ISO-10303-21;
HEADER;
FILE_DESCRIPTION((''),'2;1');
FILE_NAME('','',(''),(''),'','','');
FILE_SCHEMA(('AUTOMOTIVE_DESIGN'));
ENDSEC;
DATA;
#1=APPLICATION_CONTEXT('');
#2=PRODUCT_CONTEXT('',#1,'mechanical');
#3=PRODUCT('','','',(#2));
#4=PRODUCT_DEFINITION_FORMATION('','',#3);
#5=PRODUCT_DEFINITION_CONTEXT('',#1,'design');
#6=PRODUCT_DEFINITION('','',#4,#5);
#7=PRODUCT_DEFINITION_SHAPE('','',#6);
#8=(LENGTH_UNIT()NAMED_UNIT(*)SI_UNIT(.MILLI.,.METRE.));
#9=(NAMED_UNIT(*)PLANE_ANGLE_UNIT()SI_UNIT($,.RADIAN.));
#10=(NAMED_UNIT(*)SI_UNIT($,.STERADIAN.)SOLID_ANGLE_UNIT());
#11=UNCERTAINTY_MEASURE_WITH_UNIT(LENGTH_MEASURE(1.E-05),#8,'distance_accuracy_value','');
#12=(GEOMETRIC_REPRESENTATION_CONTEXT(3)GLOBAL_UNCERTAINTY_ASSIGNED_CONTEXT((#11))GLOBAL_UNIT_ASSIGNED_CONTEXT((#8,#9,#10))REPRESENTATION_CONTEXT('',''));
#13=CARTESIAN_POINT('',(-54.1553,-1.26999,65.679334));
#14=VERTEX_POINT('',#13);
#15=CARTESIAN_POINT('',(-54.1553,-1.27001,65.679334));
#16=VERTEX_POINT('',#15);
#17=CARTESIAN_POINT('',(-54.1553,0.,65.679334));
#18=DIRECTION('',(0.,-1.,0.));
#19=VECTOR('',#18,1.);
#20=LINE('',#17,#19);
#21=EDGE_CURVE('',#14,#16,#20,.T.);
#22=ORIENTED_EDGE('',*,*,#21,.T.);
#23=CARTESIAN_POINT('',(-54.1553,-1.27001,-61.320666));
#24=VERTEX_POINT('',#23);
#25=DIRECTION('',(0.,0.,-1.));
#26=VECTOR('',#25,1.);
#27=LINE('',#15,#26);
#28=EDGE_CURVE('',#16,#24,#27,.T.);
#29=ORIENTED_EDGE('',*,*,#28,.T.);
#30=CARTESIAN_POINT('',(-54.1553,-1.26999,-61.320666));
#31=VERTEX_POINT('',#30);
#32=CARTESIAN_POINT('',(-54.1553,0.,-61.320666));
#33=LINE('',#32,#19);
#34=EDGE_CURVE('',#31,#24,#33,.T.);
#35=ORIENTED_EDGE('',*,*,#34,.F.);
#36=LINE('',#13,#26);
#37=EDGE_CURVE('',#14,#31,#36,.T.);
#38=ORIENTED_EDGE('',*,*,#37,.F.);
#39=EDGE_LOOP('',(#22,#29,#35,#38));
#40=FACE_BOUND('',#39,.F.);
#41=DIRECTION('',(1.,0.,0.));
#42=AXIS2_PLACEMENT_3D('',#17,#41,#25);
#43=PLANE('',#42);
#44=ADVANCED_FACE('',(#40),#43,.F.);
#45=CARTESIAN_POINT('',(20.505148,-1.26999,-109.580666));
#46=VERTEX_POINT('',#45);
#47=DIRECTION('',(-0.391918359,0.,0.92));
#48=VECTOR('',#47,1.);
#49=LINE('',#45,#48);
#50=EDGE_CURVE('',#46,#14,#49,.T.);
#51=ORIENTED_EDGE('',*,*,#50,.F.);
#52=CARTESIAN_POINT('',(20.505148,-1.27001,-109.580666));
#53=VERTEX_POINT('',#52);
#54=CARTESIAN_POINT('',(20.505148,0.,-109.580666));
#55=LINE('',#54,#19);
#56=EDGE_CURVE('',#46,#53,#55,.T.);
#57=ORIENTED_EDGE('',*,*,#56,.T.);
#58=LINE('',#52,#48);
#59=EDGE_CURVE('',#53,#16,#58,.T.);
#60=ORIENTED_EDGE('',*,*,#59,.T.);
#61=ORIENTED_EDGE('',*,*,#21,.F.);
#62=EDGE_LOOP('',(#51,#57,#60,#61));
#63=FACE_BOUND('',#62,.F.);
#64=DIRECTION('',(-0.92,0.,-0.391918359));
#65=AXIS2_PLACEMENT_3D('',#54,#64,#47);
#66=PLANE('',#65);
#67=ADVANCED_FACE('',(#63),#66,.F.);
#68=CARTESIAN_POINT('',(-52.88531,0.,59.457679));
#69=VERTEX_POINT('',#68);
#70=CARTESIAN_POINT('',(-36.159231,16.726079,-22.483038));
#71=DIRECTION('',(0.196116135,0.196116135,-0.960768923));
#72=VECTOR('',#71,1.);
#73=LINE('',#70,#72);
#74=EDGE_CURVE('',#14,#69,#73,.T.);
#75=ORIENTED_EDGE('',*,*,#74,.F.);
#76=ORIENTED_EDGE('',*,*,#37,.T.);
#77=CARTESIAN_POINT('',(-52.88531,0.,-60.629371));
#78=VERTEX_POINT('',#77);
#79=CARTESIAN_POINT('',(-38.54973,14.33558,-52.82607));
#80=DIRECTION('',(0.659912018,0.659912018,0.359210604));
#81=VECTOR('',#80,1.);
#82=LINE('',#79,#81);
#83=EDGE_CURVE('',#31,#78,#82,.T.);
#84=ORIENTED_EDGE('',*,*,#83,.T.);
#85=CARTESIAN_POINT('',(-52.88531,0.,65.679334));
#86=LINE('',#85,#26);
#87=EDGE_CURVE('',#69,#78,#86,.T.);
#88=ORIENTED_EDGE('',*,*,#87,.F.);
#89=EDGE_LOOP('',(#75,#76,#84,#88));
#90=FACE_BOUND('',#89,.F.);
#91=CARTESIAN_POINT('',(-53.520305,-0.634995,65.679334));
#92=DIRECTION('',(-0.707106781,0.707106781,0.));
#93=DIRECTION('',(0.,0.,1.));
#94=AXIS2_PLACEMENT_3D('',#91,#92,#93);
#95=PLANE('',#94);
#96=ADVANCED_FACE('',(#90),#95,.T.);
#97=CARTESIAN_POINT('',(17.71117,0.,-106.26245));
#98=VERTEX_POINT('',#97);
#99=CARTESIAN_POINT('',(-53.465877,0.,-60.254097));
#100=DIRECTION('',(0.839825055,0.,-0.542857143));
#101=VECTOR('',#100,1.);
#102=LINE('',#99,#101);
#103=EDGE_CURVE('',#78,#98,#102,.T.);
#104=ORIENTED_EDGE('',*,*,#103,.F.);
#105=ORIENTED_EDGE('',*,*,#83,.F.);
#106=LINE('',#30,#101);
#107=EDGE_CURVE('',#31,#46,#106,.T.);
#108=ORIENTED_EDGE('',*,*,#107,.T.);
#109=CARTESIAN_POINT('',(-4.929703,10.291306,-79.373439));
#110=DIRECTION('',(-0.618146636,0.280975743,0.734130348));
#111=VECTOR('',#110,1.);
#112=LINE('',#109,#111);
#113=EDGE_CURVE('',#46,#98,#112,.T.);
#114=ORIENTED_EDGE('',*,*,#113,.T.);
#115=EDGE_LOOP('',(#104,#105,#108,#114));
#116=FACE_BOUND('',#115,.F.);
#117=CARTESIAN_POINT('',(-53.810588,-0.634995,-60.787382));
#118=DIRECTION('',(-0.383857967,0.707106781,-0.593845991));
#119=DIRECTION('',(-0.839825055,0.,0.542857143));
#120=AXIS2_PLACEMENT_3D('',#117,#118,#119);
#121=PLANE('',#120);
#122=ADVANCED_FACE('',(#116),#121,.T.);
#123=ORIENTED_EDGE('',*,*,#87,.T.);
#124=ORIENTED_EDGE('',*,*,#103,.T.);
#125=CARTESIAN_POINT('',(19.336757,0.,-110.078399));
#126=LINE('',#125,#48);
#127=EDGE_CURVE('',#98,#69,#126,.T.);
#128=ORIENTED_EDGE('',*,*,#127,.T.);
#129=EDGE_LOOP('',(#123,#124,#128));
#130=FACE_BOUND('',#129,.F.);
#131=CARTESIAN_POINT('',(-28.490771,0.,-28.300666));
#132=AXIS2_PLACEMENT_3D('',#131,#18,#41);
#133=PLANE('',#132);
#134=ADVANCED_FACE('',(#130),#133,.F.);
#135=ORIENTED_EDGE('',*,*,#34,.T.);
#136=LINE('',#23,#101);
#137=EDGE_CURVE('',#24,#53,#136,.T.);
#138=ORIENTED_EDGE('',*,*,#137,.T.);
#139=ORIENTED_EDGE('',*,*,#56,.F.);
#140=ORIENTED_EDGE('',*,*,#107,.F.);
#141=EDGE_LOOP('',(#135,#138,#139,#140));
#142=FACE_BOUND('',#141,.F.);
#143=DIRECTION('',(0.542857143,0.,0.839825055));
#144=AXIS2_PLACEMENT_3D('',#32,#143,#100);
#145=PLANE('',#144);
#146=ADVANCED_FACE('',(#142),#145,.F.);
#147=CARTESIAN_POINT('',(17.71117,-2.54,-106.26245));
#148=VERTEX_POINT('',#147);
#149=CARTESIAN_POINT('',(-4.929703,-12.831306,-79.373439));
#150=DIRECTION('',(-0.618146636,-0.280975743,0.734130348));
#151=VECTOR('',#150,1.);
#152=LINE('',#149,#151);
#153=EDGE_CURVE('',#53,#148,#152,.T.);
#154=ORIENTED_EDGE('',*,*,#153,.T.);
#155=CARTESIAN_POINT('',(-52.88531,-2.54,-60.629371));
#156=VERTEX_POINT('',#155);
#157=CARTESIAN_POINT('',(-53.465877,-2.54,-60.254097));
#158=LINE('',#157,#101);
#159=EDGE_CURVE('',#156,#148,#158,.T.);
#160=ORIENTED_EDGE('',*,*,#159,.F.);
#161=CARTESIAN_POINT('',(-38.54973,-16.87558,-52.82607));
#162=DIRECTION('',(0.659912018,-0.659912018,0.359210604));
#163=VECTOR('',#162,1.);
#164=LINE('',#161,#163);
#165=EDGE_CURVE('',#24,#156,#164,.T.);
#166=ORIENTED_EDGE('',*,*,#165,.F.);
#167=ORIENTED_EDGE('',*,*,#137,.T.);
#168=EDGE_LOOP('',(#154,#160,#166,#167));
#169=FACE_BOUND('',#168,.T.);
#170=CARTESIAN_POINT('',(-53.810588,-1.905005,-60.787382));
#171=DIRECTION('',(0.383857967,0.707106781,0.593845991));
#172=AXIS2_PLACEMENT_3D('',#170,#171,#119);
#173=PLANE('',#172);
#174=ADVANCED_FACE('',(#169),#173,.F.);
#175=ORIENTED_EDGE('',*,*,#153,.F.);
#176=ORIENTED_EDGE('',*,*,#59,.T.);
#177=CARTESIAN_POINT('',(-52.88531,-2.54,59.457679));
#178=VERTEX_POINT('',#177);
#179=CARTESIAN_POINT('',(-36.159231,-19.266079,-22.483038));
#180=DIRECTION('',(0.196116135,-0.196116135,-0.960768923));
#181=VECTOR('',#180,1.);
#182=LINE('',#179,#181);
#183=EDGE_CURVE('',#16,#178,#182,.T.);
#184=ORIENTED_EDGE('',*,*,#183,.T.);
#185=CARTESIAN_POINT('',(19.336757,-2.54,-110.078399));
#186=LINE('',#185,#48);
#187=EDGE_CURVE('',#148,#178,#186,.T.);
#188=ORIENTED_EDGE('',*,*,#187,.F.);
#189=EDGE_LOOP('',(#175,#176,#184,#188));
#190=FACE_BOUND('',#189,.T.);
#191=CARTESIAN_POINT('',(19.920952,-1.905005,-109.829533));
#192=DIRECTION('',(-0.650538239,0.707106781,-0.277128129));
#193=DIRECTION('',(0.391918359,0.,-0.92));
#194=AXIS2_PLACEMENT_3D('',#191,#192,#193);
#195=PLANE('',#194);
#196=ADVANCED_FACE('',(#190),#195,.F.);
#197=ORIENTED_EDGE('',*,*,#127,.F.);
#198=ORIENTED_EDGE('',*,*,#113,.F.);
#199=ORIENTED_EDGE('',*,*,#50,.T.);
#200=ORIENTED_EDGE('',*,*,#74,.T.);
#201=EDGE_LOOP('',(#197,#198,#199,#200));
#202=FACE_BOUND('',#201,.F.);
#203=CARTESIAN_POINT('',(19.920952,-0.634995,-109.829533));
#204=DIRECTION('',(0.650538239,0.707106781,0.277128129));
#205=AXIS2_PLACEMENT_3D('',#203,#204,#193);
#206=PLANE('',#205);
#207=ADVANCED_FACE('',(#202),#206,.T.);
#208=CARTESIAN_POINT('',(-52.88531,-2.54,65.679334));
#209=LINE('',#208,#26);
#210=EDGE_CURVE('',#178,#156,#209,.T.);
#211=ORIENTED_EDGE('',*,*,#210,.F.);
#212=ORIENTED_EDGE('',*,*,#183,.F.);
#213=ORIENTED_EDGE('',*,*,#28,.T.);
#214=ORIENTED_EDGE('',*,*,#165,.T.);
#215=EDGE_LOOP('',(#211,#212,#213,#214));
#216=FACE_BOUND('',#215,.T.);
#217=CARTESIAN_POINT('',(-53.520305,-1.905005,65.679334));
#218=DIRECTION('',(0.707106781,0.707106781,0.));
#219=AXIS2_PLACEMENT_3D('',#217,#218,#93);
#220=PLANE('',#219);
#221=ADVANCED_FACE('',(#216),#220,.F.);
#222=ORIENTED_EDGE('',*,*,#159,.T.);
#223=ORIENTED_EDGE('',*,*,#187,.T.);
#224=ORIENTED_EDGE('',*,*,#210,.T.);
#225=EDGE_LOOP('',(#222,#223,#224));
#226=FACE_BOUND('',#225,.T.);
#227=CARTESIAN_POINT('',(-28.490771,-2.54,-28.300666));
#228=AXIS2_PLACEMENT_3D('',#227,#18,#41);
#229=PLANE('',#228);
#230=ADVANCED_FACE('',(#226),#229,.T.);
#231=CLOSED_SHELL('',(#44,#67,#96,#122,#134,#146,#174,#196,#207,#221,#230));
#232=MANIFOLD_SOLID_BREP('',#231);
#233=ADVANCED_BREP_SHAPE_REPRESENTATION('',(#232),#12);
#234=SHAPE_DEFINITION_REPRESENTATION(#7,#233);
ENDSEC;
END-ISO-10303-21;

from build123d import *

# Parameters (mm, degrees)
F1_DEPTH = 2.54
F2_SIZE  = 1.26999


# Not quite as in the source:
# - a fillet or chamfer is up to 0.001 mm smaller than in the source, because OpenCascade refuses the exact size


with BuildPart() as f1:
    # F0 (on Front) → F1 (new body)
    with BuildSketch(Plane.XZ):
        Polygon((20.5051476899, -109.5806663148), (-54.1552996701, 65.6793336852), (-54.1552996701, -61.3206663148), align=None)
    extrude(amount=F1_DEPTH)

    # F2 (size 1.27 in the source; OpenCascade refuses exactly that, so slightly less here)
    f2_edges = [f1.edges().sort_by_distance(p)[0] for p in [
        (-16.825076, -2.54, -85.450666),
        (-16.825076, -2.54, -21.950666),
        (-54.1553, -2.54, 2.179334),
        (-16.825076, 0, -85.450666),
        (-16.825076, 0, -21.950666),
        (-54.1553, 0, 2.179334),
    ]]
    chamfer(f2_edges, length=F2_SIZE)


solid = f1.part
